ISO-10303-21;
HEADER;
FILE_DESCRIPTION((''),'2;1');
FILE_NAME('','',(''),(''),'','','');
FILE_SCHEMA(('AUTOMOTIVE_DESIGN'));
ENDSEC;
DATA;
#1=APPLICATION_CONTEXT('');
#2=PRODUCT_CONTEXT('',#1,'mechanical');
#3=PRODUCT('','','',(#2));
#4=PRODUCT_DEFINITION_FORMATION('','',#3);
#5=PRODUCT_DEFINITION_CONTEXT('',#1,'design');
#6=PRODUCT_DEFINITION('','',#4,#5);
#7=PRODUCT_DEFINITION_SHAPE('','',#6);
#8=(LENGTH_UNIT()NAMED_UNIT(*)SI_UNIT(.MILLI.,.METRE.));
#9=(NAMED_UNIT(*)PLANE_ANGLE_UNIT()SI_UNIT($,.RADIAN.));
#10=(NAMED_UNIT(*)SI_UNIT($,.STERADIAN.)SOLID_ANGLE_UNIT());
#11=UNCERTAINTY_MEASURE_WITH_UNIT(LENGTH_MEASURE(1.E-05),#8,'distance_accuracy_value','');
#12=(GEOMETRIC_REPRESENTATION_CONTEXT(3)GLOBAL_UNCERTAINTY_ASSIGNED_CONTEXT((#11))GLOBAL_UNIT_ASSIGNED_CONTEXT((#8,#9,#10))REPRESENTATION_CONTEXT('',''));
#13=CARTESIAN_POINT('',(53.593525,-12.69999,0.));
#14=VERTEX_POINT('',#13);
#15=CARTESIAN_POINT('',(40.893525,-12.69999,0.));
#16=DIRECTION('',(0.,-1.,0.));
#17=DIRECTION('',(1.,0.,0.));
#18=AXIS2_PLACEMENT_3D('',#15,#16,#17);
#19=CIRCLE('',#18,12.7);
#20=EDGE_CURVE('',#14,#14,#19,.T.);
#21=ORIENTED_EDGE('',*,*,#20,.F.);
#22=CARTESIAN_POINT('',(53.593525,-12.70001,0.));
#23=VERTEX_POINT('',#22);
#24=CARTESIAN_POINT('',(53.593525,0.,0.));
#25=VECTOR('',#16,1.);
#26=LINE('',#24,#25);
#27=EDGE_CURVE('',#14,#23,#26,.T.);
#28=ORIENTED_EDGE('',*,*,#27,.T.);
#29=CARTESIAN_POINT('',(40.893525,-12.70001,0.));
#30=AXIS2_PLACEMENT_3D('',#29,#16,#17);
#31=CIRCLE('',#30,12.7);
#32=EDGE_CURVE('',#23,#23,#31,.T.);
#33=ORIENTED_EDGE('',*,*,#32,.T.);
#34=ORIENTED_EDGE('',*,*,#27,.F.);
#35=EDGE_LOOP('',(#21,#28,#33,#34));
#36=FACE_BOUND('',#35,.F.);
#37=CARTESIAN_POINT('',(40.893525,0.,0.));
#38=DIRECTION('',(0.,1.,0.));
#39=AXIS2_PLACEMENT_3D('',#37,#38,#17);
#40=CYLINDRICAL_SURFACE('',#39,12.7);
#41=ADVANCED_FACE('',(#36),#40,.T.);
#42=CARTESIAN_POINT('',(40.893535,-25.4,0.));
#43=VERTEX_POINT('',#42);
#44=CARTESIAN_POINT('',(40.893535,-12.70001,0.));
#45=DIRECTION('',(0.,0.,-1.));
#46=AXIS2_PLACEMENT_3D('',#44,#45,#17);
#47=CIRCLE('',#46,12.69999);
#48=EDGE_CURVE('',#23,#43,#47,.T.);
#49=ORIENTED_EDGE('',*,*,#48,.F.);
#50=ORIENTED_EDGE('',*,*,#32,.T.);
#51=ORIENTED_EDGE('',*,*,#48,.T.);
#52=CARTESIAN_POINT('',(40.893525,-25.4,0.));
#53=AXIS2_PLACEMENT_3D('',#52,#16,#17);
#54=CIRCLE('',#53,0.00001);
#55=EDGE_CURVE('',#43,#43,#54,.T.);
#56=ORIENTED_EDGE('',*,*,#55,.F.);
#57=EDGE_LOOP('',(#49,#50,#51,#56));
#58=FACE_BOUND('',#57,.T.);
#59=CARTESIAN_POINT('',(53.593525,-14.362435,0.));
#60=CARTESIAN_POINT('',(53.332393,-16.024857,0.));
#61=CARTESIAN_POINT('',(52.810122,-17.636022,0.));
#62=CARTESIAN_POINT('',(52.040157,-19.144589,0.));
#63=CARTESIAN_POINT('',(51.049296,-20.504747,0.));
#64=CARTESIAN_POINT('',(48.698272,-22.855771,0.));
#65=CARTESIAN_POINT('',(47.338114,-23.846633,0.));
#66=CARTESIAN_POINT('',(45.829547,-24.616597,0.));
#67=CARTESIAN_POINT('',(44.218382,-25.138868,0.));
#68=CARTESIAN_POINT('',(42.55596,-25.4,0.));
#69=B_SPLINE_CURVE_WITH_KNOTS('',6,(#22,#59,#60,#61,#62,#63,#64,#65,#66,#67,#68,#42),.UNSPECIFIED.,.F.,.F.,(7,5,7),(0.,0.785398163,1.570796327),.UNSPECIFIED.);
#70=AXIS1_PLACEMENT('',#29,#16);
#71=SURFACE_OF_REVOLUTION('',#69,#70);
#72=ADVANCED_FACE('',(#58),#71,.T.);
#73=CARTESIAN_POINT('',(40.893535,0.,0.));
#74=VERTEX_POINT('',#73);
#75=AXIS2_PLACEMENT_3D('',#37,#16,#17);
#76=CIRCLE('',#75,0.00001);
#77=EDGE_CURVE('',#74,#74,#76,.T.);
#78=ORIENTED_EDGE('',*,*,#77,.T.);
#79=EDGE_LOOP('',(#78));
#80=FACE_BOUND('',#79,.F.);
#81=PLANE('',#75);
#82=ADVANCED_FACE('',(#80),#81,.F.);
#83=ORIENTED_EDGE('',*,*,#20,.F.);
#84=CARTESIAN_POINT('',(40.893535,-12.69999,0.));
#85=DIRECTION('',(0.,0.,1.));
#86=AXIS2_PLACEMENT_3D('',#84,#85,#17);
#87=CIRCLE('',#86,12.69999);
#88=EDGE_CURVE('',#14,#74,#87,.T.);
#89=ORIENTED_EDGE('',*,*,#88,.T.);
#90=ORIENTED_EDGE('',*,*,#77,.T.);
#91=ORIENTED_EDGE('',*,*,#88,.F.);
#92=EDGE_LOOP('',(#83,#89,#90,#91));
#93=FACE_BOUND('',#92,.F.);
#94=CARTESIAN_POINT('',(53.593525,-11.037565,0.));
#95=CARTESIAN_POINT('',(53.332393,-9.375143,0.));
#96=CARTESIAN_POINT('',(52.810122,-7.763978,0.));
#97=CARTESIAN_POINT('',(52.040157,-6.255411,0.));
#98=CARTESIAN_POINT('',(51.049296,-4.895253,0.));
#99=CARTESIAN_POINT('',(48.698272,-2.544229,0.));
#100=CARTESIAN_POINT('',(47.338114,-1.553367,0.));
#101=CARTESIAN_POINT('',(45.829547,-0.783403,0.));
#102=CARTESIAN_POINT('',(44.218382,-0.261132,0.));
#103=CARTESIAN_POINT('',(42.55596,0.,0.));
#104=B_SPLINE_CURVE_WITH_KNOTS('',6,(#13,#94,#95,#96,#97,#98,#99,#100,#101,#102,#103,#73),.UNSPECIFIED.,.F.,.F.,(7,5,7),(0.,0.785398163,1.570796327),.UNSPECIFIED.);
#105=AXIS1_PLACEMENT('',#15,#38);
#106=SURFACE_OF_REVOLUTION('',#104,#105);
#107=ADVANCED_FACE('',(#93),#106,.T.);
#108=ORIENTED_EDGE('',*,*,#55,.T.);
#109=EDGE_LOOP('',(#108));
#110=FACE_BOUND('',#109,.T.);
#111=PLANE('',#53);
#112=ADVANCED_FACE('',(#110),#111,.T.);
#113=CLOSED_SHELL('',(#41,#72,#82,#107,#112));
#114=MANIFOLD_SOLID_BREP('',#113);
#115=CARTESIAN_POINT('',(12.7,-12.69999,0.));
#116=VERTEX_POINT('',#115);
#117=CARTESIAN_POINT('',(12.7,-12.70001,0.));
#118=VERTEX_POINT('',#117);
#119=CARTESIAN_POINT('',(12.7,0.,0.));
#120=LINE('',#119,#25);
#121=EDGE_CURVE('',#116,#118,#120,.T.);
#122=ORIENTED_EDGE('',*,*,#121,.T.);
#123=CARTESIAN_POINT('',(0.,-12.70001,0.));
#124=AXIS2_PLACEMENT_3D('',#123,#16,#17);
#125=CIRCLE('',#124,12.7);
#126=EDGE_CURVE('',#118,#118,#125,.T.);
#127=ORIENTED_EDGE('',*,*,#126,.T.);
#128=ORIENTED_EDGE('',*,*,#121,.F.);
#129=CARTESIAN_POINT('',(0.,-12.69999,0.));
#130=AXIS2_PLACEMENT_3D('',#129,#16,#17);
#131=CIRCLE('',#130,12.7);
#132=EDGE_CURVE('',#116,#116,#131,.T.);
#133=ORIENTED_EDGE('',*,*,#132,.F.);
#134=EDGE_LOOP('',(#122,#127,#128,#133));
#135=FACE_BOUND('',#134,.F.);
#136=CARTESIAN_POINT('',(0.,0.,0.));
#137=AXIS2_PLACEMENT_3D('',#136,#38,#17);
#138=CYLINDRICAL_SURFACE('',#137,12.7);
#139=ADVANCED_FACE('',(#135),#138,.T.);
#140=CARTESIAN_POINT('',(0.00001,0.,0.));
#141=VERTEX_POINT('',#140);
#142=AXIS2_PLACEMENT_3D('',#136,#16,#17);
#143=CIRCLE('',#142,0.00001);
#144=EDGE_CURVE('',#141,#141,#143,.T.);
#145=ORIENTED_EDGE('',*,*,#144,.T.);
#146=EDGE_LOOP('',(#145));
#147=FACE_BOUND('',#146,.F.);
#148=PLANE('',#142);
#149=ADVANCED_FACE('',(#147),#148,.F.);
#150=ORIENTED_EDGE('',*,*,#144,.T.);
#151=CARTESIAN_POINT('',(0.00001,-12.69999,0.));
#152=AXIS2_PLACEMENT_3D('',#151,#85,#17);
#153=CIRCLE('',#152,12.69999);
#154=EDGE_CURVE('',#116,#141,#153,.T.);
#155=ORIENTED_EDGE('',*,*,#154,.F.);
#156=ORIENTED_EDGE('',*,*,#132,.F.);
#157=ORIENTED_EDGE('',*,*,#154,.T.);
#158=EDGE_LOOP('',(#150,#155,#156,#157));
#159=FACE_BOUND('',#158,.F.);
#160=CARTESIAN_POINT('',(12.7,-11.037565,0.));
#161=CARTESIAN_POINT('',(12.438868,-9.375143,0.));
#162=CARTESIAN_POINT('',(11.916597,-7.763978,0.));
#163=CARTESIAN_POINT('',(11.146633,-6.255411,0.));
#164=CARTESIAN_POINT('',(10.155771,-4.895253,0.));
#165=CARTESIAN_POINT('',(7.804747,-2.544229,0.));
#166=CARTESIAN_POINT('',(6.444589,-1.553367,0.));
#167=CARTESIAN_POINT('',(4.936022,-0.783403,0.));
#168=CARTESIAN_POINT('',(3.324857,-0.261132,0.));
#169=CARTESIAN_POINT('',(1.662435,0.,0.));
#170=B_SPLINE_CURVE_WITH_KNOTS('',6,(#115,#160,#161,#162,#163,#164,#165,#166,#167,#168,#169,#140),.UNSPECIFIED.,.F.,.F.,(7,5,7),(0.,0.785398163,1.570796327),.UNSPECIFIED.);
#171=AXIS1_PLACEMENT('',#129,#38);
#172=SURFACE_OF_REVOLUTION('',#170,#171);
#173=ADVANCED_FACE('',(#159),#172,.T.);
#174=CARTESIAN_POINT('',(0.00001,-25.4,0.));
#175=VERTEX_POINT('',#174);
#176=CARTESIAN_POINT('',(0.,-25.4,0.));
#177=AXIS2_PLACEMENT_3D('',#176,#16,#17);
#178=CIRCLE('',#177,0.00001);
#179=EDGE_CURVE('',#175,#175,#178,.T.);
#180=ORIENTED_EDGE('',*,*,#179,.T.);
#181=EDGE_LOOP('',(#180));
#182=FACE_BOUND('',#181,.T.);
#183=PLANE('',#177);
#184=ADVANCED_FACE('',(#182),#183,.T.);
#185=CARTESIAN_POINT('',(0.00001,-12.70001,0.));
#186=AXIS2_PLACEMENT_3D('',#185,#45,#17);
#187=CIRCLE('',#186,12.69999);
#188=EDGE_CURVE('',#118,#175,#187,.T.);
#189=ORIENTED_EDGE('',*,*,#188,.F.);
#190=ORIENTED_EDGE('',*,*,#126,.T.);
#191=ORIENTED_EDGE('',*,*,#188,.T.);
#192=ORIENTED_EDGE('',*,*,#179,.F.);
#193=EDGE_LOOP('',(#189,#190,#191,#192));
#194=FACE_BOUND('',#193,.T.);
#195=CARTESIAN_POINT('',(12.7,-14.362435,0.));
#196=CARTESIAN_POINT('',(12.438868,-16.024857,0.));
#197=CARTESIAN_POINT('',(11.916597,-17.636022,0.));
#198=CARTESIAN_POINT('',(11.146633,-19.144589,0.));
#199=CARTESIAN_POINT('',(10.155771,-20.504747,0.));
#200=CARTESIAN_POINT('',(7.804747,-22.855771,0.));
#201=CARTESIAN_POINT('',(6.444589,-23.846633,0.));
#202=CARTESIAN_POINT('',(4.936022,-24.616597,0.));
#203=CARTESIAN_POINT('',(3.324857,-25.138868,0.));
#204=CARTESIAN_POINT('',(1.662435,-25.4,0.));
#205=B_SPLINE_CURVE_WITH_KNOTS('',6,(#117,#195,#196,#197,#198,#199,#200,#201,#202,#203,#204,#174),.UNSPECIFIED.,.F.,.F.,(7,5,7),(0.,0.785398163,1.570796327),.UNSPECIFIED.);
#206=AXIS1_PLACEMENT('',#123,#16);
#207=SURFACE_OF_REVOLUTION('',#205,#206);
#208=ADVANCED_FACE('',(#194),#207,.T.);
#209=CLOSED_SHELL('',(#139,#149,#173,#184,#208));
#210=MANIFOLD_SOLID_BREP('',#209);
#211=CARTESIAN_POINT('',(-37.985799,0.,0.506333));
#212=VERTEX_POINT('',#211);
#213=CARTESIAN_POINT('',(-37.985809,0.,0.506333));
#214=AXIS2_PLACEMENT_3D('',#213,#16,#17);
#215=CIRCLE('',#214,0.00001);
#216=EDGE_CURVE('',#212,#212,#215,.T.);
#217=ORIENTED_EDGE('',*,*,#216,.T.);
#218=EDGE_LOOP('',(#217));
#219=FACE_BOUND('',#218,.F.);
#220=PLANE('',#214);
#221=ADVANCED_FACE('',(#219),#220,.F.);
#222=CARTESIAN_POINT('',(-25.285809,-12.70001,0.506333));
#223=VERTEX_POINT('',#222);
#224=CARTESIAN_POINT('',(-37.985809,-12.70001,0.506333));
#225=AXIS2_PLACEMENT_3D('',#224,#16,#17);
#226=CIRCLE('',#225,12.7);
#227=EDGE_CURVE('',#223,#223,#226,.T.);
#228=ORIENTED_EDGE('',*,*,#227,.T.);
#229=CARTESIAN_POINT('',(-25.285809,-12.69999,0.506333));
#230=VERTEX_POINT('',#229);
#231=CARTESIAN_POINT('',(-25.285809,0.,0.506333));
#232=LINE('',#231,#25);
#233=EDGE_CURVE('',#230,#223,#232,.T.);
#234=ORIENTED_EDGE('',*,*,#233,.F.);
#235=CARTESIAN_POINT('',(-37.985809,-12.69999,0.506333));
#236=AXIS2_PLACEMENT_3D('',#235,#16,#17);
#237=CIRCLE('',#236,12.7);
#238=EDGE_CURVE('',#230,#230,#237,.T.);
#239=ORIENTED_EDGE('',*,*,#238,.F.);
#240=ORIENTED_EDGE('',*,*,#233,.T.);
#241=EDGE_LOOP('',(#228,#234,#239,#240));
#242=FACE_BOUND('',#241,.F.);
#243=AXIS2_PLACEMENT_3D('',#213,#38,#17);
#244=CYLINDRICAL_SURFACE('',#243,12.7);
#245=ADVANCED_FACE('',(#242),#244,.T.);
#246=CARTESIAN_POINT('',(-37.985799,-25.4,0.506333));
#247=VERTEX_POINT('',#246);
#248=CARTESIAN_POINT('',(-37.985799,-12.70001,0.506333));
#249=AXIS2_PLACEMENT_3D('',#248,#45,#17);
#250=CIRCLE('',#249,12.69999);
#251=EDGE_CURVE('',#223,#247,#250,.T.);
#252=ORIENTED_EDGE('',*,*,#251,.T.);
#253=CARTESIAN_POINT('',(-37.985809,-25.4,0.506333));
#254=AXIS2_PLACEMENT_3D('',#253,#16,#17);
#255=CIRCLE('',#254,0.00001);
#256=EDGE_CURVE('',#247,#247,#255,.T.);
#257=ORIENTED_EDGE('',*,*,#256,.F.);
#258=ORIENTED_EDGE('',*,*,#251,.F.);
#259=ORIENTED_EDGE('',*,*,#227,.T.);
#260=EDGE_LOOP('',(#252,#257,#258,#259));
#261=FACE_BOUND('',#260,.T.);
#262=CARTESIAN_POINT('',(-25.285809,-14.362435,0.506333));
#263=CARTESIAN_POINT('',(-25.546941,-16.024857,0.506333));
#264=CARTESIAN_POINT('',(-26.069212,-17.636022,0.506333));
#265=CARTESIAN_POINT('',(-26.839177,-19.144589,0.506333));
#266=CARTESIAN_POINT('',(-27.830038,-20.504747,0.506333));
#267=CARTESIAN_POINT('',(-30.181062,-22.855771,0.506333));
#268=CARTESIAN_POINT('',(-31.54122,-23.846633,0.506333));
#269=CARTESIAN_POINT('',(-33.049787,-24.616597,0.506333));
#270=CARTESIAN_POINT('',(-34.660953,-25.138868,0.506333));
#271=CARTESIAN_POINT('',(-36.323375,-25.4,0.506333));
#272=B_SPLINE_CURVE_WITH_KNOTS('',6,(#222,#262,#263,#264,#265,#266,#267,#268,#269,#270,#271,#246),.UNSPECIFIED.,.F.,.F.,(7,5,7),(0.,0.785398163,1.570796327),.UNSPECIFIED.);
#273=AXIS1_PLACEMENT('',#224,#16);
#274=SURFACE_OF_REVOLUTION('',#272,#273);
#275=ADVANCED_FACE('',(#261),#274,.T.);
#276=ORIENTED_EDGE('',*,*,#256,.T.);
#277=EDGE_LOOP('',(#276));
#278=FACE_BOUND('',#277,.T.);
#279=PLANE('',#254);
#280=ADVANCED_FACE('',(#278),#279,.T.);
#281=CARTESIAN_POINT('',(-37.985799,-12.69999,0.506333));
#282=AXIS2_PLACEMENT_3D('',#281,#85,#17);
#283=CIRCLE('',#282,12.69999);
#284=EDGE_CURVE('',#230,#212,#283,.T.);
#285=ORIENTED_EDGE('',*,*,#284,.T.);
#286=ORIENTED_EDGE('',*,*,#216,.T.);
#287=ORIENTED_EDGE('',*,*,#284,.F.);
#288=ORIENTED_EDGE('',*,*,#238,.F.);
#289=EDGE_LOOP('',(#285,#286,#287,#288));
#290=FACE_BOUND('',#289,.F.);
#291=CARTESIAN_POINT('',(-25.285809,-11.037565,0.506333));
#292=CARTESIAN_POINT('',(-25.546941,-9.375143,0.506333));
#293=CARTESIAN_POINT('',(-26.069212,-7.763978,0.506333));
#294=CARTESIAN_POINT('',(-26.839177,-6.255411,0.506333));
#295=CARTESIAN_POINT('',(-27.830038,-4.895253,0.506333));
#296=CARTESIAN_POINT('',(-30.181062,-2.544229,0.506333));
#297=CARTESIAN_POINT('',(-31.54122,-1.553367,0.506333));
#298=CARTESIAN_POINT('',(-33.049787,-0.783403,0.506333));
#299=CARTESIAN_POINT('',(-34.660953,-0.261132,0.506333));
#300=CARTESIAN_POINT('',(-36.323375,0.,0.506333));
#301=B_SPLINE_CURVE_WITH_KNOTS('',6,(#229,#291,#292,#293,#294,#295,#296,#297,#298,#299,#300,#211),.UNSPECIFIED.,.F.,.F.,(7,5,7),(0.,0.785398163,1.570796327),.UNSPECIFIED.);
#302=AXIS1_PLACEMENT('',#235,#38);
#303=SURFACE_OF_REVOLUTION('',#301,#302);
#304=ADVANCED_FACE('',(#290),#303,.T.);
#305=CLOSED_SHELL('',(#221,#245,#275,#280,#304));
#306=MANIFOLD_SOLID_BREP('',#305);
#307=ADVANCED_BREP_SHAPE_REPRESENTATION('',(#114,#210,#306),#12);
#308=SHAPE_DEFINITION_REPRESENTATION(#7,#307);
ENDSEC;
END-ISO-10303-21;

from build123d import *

# Parameters (mm, degrees)
F0_R     = 12.7
F1_DEPTH = 25.4
F2_R     = 12.69999
F3_R     = 12.69999
F4_R     = 12.69999


# Not quite as in the source:
# - a fillet or chamfer is up to 0.001 mm smaller than in the source, because OpenCascade refuses the exact size


with BuildPart() as f1:
    # F0 (on Front) → F1 (new body)
    with BuildSketch(Plane.XZ):
        Circle(F0_R)
    extrude(amount=F1_DEPTH)

    # F2 (radius 12.7 in the source; OpenCascade refuses exactly that, so slightly less here)
    f2_edges = [f1.edges().sort_by_distance(p)[0] for p in [
        (-12.7, 0, 0),
        (-12.7, -25.4, 0),
    ]]
    fillet(f2_edges, radius=F2_R)


with BuildPart() as f1b:
    # F0 (on Front) → F1, piece 2 (new body)
    with BuildSketch(Plane.XZ):
        with Locations((-37.9858093821, 0.5063325813)):
            Circle(F0_R)
    extrude(amount=F1_DEPTH)

    # F3 (radius 12.7 in the source; OpenCascade refuses exactly that, so slightly less here)
    f3_edges = [f1b.edges().sort_by_distance(p)[0] for p in [
        (-50.685809, -25.4, 0.506333),
        (-50.685809, 0, 0.506333),
    ]]
    fillet(f3_edges, radius=F3_R)


with BuildPart() as f1c:
    # F0 (on Front) → F1, piece 3 (new body)
    with BuildSketch(Plane.XZ):
        with Locations((40.8935248852, 0)):
            Circle(F0_R)
    extrude(amount=F1_DEPTH)

    # F4 (radius 12.7 in the source; OpenCascade refuses exactly that, so slightly less here)
    f4_edges = [f1c.edges().sort_by_distance(p)[0] for p in [
        (28.193525, -25.4, 0),
        (28.193525, 0, 0),
    ]]
    fillet(f4_edges, radius=F4_R)


solid = Compound([f1.part, f1b.part, f1c.part])
